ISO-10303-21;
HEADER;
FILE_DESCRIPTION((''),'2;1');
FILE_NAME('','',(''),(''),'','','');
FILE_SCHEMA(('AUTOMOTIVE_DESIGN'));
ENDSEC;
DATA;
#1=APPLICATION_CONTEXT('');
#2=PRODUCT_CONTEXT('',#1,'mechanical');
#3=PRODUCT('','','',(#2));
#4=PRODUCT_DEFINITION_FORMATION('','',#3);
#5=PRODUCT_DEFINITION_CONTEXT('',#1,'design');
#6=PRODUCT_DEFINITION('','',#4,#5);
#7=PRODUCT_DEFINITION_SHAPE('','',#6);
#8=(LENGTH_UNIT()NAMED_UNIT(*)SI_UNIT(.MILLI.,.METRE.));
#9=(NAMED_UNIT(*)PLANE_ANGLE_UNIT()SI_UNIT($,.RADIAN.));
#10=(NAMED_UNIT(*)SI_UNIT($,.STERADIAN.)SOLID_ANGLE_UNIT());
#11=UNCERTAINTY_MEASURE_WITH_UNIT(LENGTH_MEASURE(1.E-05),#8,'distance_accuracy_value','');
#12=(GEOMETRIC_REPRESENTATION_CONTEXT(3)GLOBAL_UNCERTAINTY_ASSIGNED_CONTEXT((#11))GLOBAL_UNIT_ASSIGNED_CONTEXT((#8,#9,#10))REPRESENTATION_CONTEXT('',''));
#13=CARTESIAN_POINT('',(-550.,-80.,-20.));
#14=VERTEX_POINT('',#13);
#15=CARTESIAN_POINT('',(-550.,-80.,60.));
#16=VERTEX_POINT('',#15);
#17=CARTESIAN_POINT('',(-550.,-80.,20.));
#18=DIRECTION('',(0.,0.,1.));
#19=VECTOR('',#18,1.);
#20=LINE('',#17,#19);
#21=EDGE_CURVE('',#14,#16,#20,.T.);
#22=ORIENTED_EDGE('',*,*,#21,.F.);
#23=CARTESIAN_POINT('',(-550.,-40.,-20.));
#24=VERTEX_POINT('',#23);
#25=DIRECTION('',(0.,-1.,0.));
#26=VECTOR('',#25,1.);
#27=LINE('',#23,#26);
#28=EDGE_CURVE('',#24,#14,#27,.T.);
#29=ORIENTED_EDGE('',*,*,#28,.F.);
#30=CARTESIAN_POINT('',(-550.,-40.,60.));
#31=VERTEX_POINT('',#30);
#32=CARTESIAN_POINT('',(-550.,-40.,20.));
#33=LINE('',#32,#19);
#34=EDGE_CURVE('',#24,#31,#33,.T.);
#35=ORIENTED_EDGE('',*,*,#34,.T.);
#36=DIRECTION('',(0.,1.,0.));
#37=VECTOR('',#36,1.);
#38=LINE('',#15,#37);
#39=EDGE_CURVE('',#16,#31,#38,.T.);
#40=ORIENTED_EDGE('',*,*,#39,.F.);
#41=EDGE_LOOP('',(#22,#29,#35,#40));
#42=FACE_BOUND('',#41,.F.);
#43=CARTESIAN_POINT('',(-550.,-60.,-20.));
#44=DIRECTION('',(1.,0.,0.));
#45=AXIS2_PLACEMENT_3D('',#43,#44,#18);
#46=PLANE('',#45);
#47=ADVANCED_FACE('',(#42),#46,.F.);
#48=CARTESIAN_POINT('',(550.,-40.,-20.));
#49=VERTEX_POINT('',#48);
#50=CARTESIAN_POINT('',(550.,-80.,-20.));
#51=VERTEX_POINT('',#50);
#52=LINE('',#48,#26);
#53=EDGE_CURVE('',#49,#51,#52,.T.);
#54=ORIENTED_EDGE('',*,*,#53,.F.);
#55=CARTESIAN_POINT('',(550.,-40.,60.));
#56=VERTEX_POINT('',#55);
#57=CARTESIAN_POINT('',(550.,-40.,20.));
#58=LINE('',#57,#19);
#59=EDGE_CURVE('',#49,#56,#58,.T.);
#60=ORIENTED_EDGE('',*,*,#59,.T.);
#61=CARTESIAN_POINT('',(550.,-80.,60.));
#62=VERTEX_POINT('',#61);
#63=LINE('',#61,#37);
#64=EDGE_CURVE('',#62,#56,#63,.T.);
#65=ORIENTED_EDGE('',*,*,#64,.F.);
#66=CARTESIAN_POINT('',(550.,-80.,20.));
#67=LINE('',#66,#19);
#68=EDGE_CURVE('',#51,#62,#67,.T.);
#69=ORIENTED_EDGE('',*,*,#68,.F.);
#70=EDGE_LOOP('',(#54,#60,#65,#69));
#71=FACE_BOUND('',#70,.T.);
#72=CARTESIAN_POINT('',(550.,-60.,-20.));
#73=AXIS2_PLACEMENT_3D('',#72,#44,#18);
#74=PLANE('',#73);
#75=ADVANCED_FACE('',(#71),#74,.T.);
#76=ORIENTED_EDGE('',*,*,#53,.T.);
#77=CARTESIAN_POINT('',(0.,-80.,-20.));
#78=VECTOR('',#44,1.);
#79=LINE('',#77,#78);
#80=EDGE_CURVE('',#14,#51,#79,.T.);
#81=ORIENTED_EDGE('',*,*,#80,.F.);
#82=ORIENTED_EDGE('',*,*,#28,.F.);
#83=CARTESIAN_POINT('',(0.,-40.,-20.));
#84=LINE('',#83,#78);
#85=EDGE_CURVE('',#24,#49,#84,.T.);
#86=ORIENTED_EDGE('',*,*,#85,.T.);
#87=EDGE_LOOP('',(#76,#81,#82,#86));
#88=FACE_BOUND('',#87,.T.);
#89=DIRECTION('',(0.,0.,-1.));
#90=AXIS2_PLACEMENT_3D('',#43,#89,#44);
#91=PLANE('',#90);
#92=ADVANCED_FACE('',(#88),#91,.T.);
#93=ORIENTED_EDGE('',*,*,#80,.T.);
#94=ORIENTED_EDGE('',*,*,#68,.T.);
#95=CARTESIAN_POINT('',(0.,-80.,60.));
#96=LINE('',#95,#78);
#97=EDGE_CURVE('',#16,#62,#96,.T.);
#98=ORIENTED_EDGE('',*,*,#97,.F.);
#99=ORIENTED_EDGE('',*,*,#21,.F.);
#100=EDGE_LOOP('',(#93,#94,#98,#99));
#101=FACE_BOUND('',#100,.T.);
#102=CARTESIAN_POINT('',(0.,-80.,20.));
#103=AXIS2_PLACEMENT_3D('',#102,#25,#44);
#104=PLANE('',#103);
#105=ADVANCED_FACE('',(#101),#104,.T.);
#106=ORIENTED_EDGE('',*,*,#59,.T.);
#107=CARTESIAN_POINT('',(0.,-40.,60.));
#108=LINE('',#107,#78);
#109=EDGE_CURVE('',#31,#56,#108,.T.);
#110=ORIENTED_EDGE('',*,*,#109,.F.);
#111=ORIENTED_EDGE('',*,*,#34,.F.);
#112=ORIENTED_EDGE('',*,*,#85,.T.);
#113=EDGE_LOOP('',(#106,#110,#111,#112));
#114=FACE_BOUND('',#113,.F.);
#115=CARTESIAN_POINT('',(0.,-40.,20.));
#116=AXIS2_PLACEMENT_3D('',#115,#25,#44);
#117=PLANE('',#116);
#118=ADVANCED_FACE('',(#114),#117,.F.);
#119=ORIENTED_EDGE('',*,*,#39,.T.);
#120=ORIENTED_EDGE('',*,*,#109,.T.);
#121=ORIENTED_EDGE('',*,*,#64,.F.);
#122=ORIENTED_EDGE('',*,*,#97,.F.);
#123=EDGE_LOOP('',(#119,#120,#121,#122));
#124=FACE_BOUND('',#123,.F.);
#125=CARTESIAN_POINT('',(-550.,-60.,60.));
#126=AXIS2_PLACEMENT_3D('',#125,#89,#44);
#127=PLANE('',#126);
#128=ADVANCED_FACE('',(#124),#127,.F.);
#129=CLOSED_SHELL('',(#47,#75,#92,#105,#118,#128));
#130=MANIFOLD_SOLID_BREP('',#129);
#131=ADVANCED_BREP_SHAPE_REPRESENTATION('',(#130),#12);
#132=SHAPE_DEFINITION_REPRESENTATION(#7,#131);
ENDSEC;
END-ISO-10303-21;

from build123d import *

# Parameters (mm, degrees)
F0_W     = 1100
F0_H     = 80
F1_DEPTH = 20
F2_ANGLE = 90


with BuildPart() as f1:
    # F0 (on Top) → F1 (new body, symmetric)
    with BuildSketch(Plane.XY):
        Rectangle(F0_W, F0_H)
    extrude(amount=F1_DEPTH, both=True)


with BuildPart() as f1_1:
    # F2: moved
    add(f1.part.rotate(Axis((0, -40, -20), (1, 0, 0)), F2_ANGLE))


solid = f1_1.part
